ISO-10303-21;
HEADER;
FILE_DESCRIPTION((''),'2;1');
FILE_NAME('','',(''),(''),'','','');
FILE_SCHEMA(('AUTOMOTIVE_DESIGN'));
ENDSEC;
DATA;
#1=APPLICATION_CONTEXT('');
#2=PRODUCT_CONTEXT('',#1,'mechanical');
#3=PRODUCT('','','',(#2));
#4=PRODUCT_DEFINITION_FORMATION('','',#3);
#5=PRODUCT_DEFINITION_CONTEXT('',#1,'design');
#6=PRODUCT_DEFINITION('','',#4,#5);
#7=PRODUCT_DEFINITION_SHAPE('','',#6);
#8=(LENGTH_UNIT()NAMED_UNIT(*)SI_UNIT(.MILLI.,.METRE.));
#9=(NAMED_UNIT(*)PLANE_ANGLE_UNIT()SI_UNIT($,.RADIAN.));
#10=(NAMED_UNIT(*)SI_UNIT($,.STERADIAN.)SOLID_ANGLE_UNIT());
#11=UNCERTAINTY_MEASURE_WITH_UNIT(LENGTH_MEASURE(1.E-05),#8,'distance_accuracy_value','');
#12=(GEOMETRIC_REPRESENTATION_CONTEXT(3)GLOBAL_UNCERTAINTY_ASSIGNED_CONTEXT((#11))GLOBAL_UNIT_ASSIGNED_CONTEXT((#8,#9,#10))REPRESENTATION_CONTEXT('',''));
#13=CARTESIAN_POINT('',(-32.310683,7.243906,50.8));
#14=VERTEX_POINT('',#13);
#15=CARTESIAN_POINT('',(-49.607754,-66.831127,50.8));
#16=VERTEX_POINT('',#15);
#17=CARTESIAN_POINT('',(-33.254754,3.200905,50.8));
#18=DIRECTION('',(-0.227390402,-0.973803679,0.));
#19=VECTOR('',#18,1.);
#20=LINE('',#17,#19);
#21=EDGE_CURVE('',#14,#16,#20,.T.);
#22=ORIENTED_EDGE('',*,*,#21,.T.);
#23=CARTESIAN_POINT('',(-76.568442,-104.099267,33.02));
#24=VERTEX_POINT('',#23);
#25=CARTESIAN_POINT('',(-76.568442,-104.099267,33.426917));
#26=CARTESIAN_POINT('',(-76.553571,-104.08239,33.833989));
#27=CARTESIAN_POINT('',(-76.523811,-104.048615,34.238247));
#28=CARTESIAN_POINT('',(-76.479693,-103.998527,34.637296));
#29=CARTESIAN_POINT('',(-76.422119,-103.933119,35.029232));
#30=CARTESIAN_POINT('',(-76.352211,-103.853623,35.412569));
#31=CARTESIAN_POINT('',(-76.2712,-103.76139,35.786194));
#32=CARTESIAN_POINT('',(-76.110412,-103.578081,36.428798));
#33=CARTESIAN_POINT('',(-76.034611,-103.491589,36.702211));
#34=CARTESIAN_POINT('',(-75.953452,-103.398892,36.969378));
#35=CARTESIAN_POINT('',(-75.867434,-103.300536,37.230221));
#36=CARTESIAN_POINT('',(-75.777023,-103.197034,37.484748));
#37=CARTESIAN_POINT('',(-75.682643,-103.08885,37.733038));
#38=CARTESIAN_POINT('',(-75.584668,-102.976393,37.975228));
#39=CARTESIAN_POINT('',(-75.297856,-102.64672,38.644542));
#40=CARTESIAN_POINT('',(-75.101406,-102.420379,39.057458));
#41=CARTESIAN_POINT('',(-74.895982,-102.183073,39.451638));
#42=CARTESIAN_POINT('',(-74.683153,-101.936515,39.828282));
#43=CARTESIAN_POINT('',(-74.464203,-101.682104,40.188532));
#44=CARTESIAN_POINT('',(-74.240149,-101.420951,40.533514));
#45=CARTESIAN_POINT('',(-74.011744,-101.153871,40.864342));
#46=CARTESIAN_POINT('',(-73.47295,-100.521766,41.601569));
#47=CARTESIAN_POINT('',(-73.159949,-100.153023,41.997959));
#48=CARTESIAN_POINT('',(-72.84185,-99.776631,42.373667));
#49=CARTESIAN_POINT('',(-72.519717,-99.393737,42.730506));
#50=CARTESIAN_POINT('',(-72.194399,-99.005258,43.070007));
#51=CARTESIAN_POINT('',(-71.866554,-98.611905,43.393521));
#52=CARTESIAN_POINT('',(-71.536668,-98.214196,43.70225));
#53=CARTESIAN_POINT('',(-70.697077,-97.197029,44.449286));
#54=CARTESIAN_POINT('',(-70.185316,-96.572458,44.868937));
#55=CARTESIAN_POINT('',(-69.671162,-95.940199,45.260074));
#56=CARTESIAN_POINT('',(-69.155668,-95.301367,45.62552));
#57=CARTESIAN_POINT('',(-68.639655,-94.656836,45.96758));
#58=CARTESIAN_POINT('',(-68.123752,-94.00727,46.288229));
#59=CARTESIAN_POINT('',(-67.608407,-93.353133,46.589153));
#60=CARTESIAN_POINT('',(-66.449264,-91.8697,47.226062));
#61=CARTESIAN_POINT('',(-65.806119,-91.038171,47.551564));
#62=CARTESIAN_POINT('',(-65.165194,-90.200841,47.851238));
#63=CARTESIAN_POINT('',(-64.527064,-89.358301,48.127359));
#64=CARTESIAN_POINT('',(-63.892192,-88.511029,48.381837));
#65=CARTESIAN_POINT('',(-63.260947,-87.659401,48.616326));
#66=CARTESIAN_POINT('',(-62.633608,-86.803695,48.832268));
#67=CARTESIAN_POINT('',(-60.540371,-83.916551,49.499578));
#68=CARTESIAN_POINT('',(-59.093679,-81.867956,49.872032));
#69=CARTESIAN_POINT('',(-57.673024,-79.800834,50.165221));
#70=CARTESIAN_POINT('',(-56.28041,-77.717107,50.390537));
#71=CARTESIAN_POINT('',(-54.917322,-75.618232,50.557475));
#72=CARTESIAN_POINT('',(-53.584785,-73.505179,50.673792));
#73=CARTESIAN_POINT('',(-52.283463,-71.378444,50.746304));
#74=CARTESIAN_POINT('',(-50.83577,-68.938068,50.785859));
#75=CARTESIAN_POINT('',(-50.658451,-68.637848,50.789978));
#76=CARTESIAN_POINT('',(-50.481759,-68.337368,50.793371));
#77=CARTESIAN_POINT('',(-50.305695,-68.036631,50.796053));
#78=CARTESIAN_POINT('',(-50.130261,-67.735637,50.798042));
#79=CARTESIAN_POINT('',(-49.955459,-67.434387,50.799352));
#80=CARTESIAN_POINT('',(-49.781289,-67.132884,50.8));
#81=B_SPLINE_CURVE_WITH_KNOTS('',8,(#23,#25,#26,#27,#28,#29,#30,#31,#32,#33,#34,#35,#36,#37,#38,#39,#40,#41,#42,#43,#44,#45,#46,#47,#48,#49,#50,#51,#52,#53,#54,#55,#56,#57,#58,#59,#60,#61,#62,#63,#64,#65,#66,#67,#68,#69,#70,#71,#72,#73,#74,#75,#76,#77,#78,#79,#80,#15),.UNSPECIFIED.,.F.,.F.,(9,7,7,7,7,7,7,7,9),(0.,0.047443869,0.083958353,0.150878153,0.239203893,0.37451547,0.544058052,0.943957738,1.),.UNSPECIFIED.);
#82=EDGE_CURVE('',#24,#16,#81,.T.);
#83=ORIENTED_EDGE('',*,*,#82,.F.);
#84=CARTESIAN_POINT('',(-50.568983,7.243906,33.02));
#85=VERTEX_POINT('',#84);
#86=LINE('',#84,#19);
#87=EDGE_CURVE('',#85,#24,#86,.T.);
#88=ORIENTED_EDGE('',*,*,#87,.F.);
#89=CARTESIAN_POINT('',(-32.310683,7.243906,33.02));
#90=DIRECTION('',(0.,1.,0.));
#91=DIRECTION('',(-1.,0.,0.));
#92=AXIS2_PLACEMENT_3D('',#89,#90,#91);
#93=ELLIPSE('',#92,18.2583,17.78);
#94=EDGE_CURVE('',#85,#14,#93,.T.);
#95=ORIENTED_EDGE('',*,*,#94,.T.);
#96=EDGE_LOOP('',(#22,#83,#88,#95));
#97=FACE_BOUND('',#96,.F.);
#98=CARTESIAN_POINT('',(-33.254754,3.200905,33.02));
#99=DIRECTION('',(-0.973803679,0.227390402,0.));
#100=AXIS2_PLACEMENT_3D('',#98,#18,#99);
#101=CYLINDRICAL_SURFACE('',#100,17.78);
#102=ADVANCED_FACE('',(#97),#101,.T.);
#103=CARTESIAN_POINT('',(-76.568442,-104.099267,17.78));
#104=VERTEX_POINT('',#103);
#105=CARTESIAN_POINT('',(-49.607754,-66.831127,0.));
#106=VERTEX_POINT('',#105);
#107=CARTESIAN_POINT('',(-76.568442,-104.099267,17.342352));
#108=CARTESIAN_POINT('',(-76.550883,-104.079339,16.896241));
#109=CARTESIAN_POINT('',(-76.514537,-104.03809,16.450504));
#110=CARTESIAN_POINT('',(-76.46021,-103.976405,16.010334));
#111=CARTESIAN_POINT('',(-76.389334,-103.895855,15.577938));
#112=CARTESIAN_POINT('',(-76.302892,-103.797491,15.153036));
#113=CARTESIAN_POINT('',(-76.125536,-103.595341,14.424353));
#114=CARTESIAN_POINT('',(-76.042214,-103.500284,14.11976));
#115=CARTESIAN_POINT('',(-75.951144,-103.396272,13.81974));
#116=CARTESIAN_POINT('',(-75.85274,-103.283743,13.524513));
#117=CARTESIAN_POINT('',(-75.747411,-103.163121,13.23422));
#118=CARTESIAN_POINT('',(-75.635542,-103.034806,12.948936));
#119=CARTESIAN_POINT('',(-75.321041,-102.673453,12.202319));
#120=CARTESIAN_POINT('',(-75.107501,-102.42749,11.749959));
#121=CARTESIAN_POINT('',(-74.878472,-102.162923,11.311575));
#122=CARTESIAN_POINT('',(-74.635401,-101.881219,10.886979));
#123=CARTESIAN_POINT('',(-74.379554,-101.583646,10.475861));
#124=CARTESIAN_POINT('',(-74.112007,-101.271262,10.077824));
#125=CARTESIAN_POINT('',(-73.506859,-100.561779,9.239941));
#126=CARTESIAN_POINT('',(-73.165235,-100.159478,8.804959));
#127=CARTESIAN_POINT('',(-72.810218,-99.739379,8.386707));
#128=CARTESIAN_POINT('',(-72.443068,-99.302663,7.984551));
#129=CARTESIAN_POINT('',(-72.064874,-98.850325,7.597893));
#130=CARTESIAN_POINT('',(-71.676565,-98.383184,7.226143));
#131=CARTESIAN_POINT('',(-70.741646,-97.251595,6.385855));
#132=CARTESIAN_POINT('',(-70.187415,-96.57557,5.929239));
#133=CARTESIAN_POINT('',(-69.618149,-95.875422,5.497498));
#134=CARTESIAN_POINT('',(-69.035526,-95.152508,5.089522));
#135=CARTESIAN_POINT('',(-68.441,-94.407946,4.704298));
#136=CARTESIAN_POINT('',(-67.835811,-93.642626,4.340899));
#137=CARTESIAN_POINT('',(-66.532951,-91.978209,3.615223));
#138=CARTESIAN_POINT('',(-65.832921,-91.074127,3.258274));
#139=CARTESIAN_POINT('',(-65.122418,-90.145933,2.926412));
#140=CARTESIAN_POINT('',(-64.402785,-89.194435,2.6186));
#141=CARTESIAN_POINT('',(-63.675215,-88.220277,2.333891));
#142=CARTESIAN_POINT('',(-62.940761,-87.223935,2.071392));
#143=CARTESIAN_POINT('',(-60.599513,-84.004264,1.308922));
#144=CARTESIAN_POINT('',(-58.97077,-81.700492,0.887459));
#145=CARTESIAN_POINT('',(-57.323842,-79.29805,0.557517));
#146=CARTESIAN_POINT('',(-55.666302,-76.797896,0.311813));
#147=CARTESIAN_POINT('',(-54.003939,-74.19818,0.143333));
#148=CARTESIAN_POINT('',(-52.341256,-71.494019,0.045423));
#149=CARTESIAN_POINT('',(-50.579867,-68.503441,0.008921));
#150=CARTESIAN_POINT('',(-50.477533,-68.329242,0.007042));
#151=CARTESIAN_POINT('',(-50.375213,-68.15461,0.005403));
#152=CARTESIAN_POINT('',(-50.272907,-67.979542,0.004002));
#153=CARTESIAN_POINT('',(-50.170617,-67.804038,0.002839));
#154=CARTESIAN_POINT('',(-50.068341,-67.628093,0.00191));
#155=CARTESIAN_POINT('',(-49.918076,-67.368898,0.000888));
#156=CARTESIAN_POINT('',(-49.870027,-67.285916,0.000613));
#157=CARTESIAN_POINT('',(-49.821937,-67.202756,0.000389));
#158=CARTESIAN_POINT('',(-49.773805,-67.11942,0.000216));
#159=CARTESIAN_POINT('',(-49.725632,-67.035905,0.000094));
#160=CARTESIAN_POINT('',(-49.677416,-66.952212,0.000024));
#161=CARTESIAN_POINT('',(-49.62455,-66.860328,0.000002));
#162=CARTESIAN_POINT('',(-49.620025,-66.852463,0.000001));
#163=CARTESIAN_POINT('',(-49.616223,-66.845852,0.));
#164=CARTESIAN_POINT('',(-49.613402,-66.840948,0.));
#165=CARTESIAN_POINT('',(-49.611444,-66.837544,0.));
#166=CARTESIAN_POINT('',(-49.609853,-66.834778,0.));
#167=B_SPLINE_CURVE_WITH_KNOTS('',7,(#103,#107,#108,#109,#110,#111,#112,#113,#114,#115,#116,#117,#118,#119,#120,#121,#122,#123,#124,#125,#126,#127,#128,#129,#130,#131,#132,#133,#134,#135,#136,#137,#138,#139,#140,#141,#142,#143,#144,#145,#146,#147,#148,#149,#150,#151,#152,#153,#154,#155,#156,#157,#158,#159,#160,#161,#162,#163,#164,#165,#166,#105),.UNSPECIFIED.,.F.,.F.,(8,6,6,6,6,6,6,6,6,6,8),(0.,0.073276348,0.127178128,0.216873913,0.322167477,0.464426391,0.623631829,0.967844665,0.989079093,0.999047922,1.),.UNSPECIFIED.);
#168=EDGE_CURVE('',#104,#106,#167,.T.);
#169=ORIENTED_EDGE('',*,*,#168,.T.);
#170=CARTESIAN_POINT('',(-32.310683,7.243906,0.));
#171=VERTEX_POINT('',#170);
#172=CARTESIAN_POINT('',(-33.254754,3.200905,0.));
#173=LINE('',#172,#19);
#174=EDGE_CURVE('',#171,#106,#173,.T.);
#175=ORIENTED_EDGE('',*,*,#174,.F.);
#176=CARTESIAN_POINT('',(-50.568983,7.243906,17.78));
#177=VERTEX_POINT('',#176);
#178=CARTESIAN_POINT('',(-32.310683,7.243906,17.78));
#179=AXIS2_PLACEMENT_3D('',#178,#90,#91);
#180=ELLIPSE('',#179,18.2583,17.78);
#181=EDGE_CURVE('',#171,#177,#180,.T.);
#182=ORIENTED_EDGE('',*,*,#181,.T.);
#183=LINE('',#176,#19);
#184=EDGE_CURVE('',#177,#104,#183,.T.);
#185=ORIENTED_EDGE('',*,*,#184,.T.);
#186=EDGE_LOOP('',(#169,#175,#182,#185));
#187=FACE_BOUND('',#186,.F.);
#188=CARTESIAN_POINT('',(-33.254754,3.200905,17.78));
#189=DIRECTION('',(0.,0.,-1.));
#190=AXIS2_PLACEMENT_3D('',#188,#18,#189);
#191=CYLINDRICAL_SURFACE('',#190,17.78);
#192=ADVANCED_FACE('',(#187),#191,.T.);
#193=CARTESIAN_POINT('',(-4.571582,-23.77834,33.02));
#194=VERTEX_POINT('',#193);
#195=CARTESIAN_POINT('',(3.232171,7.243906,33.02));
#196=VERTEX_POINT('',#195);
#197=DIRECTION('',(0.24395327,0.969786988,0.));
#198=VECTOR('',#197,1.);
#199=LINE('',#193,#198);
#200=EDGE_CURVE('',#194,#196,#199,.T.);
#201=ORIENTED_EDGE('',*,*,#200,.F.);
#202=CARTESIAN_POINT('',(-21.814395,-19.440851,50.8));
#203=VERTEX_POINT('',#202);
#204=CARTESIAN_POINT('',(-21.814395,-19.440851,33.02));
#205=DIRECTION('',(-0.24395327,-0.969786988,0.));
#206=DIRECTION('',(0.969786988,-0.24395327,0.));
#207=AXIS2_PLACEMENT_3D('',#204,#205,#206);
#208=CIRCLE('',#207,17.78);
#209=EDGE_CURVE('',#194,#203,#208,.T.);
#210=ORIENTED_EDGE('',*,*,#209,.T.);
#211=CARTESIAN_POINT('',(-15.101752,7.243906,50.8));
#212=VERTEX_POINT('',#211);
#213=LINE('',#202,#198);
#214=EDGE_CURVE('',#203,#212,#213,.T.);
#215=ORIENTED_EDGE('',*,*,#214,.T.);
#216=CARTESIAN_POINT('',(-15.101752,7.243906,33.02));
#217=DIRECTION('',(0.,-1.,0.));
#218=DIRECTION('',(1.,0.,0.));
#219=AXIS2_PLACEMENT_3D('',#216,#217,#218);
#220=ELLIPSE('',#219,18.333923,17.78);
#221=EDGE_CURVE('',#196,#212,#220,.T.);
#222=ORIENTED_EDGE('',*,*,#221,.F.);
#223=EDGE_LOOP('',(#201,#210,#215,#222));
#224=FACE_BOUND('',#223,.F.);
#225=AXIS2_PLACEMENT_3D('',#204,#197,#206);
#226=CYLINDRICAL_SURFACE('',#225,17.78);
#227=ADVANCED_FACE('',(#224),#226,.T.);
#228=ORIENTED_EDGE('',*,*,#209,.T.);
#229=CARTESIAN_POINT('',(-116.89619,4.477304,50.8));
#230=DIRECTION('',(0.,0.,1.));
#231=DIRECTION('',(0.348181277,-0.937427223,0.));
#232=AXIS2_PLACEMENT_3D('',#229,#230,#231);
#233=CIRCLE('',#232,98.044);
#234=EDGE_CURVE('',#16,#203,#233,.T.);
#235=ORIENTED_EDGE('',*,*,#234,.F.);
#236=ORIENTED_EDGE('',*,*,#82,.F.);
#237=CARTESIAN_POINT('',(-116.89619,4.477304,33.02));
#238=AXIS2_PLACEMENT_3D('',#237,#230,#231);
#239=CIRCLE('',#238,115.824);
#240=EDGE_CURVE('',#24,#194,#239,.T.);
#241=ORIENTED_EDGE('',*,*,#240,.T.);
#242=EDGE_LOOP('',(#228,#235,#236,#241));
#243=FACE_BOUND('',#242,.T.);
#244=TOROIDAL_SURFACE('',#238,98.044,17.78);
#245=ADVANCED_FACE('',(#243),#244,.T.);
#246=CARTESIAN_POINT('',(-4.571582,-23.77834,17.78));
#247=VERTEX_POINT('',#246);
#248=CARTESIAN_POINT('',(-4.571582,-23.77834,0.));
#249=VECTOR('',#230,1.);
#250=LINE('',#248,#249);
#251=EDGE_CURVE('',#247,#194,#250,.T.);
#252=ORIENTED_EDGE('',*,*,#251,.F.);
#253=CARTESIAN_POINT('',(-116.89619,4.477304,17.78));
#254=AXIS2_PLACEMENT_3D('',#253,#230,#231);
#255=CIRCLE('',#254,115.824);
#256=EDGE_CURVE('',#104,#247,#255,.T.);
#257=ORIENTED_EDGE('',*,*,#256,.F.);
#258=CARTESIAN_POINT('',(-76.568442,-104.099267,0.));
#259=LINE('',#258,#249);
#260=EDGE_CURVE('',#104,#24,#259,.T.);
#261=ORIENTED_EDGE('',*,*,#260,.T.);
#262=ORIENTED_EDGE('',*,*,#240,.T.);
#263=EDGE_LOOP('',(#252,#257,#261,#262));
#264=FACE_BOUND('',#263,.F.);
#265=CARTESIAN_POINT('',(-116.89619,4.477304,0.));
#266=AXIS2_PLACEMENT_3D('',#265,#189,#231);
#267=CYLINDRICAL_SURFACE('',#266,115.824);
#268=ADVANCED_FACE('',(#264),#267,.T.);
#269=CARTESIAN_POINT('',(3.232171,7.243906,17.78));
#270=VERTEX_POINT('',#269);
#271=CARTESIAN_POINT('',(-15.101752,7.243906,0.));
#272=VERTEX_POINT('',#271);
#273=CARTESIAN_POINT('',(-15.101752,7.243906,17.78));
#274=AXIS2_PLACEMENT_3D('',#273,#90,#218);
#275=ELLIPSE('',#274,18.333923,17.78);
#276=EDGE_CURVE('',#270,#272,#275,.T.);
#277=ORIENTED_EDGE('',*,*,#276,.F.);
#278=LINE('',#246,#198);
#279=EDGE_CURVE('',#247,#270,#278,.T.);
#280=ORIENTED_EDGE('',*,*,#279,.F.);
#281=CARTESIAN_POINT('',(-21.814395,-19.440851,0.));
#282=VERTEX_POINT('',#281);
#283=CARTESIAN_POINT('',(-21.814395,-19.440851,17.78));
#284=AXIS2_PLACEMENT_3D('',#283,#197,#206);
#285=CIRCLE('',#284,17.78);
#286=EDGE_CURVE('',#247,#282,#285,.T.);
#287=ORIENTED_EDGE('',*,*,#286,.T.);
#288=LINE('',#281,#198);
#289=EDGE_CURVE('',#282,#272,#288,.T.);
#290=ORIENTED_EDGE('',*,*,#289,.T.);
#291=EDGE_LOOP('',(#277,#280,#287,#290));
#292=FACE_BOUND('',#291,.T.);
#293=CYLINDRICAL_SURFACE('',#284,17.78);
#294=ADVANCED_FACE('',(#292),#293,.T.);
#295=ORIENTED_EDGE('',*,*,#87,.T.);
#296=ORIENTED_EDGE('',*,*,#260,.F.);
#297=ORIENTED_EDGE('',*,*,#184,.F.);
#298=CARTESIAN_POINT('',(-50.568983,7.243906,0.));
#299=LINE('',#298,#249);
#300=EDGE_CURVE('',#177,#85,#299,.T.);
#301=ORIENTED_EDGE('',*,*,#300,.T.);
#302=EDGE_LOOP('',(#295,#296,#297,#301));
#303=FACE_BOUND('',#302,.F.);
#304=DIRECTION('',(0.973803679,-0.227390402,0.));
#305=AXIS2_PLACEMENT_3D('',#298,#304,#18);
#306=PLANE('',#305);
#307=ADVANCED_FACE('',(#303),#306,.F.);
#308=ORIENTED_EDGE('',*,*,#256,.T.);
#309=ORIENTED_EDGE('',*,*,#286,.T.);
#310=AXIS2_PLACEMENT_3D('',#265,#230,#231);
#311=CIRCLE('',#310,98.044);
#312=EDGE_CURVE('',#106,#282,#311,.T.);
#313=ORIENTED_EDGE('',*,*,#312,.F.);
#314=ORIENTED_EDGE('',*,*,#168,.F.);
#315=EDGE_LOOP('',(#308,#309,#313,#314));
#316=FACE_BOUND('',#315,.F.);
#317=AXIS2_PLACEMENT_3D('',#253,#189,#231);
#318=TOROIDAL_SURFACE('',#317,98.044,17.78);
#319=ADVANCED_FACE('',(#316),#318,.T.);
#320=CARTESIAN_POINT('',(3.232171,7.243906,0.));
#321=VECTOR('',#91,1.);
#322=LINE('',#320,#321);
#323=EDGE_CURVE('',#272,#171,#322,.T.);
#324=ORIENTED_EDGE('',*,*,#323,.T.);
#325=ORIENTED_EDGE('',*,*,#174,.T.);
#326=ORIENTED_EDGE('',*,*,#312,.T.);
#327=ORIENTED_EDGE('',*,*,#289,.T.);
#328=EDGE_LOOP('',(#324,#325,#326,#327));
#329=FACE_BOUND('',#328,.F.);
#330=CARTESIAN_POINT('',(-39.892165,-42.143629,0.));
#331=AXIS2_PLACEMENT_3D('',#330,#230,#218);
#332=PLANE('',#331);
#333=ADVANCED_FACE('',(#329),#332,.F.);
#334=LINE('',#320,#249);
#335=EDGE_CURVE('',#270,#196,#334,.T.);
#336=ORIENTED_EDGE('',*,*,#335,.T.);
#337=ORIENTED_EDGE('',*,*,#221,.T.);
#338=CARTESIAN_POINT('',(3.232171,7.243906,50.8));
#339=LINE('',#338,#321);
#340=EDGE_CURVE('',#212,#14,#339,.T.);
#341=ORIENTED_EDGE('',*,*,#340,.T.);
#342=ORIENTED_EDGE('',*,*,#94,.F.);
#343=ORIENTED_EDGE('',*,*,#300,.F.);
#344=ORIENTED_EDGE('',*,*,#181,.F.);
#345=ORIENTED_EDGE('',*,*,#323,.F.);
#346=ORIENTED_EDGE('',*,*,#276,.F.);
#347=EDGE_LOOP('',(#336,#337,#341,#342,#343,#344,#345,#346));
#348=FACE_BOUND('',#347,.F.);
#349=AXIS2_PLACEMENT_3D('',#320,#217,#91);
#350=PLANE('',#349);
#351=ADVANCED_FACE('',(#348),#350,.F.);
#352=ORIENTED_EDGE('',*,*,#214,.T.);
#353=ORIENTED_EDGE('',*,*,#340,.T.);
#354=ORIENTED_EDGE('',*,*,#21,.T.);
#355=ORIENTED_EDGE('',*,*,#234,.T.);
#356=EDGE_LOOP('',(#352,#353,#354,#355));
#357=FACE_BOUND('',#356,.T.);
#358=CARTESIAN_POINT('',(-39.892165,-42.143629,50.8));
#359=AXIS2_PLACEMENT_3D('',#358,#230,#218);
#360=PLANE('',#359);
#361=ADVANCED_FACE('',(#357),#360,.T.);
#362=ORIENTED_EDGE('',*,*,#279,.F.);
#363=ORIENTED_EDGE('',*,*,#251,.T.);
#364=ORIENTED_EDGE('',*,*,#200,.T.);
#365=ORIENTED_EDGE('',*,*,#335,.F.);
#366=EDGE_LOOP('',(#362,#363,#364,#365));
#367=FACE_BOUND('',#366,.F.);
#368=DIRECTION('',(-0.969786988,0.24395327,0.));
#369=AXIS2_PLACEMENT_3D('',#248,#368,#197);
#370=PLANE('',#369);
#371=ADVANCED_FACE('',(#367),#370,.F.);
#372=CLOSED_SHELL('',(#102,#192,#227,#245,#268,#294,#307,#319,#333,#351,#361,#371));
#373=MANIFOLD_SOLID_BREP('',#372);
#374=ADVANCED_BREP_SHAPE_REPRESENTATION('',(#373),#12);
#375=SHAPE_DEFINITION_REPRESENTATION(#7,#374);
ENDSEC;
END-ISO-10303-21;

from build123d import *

# Parameters (mm, degrees)
F1_DEPTH = 50.8
F2_R     = 17.78
F3_R     = 17.78


# Not quite as in the source:
# - a feature names something its author has since deleted; it is built from what else it names


with BuildPart() as f1:
    # F0 (on Top) → F1 (new body)
    with BuildSketch(Plane.XY):
        with BuildLine():
            Line((3.2321710605, 7.2439061478), (-50.5689829588, 7.2439061478))
            Line((-50.5689829588, 7.2439061478), (-76.5684420406, -104.0992669462))
            ThreePointArc((-76.5684420406, -104.0992669462), (-30.6491711683, -72.8314970086), (-4.5715821907, -23.7783398479))
            Line((-4.5715821907, -23.7783398479), (3.2321710605, 7.2439061478))
        make_face()
    extrude(amount=F1_DEPTH)

    # F2
    f2_edges = [f1.edges().sort_by_distance(p)[0] for p in [
        (-0.669706, -8.267217, 50.8),
        (-63.568712, -48.42768, 50.8),
    ]]
    fillet(f2_edges, radius=F2_R)

    # F3
    f3_edges = [f1.edges().sort_by_distance(p)[0] for p in [
        (-0.669706, -8.267217, 0),
        (-63.568712, -48.42768, 0),
    ]]
    fillet(f3_edges, radius=F3_R)


solid = f1.part
